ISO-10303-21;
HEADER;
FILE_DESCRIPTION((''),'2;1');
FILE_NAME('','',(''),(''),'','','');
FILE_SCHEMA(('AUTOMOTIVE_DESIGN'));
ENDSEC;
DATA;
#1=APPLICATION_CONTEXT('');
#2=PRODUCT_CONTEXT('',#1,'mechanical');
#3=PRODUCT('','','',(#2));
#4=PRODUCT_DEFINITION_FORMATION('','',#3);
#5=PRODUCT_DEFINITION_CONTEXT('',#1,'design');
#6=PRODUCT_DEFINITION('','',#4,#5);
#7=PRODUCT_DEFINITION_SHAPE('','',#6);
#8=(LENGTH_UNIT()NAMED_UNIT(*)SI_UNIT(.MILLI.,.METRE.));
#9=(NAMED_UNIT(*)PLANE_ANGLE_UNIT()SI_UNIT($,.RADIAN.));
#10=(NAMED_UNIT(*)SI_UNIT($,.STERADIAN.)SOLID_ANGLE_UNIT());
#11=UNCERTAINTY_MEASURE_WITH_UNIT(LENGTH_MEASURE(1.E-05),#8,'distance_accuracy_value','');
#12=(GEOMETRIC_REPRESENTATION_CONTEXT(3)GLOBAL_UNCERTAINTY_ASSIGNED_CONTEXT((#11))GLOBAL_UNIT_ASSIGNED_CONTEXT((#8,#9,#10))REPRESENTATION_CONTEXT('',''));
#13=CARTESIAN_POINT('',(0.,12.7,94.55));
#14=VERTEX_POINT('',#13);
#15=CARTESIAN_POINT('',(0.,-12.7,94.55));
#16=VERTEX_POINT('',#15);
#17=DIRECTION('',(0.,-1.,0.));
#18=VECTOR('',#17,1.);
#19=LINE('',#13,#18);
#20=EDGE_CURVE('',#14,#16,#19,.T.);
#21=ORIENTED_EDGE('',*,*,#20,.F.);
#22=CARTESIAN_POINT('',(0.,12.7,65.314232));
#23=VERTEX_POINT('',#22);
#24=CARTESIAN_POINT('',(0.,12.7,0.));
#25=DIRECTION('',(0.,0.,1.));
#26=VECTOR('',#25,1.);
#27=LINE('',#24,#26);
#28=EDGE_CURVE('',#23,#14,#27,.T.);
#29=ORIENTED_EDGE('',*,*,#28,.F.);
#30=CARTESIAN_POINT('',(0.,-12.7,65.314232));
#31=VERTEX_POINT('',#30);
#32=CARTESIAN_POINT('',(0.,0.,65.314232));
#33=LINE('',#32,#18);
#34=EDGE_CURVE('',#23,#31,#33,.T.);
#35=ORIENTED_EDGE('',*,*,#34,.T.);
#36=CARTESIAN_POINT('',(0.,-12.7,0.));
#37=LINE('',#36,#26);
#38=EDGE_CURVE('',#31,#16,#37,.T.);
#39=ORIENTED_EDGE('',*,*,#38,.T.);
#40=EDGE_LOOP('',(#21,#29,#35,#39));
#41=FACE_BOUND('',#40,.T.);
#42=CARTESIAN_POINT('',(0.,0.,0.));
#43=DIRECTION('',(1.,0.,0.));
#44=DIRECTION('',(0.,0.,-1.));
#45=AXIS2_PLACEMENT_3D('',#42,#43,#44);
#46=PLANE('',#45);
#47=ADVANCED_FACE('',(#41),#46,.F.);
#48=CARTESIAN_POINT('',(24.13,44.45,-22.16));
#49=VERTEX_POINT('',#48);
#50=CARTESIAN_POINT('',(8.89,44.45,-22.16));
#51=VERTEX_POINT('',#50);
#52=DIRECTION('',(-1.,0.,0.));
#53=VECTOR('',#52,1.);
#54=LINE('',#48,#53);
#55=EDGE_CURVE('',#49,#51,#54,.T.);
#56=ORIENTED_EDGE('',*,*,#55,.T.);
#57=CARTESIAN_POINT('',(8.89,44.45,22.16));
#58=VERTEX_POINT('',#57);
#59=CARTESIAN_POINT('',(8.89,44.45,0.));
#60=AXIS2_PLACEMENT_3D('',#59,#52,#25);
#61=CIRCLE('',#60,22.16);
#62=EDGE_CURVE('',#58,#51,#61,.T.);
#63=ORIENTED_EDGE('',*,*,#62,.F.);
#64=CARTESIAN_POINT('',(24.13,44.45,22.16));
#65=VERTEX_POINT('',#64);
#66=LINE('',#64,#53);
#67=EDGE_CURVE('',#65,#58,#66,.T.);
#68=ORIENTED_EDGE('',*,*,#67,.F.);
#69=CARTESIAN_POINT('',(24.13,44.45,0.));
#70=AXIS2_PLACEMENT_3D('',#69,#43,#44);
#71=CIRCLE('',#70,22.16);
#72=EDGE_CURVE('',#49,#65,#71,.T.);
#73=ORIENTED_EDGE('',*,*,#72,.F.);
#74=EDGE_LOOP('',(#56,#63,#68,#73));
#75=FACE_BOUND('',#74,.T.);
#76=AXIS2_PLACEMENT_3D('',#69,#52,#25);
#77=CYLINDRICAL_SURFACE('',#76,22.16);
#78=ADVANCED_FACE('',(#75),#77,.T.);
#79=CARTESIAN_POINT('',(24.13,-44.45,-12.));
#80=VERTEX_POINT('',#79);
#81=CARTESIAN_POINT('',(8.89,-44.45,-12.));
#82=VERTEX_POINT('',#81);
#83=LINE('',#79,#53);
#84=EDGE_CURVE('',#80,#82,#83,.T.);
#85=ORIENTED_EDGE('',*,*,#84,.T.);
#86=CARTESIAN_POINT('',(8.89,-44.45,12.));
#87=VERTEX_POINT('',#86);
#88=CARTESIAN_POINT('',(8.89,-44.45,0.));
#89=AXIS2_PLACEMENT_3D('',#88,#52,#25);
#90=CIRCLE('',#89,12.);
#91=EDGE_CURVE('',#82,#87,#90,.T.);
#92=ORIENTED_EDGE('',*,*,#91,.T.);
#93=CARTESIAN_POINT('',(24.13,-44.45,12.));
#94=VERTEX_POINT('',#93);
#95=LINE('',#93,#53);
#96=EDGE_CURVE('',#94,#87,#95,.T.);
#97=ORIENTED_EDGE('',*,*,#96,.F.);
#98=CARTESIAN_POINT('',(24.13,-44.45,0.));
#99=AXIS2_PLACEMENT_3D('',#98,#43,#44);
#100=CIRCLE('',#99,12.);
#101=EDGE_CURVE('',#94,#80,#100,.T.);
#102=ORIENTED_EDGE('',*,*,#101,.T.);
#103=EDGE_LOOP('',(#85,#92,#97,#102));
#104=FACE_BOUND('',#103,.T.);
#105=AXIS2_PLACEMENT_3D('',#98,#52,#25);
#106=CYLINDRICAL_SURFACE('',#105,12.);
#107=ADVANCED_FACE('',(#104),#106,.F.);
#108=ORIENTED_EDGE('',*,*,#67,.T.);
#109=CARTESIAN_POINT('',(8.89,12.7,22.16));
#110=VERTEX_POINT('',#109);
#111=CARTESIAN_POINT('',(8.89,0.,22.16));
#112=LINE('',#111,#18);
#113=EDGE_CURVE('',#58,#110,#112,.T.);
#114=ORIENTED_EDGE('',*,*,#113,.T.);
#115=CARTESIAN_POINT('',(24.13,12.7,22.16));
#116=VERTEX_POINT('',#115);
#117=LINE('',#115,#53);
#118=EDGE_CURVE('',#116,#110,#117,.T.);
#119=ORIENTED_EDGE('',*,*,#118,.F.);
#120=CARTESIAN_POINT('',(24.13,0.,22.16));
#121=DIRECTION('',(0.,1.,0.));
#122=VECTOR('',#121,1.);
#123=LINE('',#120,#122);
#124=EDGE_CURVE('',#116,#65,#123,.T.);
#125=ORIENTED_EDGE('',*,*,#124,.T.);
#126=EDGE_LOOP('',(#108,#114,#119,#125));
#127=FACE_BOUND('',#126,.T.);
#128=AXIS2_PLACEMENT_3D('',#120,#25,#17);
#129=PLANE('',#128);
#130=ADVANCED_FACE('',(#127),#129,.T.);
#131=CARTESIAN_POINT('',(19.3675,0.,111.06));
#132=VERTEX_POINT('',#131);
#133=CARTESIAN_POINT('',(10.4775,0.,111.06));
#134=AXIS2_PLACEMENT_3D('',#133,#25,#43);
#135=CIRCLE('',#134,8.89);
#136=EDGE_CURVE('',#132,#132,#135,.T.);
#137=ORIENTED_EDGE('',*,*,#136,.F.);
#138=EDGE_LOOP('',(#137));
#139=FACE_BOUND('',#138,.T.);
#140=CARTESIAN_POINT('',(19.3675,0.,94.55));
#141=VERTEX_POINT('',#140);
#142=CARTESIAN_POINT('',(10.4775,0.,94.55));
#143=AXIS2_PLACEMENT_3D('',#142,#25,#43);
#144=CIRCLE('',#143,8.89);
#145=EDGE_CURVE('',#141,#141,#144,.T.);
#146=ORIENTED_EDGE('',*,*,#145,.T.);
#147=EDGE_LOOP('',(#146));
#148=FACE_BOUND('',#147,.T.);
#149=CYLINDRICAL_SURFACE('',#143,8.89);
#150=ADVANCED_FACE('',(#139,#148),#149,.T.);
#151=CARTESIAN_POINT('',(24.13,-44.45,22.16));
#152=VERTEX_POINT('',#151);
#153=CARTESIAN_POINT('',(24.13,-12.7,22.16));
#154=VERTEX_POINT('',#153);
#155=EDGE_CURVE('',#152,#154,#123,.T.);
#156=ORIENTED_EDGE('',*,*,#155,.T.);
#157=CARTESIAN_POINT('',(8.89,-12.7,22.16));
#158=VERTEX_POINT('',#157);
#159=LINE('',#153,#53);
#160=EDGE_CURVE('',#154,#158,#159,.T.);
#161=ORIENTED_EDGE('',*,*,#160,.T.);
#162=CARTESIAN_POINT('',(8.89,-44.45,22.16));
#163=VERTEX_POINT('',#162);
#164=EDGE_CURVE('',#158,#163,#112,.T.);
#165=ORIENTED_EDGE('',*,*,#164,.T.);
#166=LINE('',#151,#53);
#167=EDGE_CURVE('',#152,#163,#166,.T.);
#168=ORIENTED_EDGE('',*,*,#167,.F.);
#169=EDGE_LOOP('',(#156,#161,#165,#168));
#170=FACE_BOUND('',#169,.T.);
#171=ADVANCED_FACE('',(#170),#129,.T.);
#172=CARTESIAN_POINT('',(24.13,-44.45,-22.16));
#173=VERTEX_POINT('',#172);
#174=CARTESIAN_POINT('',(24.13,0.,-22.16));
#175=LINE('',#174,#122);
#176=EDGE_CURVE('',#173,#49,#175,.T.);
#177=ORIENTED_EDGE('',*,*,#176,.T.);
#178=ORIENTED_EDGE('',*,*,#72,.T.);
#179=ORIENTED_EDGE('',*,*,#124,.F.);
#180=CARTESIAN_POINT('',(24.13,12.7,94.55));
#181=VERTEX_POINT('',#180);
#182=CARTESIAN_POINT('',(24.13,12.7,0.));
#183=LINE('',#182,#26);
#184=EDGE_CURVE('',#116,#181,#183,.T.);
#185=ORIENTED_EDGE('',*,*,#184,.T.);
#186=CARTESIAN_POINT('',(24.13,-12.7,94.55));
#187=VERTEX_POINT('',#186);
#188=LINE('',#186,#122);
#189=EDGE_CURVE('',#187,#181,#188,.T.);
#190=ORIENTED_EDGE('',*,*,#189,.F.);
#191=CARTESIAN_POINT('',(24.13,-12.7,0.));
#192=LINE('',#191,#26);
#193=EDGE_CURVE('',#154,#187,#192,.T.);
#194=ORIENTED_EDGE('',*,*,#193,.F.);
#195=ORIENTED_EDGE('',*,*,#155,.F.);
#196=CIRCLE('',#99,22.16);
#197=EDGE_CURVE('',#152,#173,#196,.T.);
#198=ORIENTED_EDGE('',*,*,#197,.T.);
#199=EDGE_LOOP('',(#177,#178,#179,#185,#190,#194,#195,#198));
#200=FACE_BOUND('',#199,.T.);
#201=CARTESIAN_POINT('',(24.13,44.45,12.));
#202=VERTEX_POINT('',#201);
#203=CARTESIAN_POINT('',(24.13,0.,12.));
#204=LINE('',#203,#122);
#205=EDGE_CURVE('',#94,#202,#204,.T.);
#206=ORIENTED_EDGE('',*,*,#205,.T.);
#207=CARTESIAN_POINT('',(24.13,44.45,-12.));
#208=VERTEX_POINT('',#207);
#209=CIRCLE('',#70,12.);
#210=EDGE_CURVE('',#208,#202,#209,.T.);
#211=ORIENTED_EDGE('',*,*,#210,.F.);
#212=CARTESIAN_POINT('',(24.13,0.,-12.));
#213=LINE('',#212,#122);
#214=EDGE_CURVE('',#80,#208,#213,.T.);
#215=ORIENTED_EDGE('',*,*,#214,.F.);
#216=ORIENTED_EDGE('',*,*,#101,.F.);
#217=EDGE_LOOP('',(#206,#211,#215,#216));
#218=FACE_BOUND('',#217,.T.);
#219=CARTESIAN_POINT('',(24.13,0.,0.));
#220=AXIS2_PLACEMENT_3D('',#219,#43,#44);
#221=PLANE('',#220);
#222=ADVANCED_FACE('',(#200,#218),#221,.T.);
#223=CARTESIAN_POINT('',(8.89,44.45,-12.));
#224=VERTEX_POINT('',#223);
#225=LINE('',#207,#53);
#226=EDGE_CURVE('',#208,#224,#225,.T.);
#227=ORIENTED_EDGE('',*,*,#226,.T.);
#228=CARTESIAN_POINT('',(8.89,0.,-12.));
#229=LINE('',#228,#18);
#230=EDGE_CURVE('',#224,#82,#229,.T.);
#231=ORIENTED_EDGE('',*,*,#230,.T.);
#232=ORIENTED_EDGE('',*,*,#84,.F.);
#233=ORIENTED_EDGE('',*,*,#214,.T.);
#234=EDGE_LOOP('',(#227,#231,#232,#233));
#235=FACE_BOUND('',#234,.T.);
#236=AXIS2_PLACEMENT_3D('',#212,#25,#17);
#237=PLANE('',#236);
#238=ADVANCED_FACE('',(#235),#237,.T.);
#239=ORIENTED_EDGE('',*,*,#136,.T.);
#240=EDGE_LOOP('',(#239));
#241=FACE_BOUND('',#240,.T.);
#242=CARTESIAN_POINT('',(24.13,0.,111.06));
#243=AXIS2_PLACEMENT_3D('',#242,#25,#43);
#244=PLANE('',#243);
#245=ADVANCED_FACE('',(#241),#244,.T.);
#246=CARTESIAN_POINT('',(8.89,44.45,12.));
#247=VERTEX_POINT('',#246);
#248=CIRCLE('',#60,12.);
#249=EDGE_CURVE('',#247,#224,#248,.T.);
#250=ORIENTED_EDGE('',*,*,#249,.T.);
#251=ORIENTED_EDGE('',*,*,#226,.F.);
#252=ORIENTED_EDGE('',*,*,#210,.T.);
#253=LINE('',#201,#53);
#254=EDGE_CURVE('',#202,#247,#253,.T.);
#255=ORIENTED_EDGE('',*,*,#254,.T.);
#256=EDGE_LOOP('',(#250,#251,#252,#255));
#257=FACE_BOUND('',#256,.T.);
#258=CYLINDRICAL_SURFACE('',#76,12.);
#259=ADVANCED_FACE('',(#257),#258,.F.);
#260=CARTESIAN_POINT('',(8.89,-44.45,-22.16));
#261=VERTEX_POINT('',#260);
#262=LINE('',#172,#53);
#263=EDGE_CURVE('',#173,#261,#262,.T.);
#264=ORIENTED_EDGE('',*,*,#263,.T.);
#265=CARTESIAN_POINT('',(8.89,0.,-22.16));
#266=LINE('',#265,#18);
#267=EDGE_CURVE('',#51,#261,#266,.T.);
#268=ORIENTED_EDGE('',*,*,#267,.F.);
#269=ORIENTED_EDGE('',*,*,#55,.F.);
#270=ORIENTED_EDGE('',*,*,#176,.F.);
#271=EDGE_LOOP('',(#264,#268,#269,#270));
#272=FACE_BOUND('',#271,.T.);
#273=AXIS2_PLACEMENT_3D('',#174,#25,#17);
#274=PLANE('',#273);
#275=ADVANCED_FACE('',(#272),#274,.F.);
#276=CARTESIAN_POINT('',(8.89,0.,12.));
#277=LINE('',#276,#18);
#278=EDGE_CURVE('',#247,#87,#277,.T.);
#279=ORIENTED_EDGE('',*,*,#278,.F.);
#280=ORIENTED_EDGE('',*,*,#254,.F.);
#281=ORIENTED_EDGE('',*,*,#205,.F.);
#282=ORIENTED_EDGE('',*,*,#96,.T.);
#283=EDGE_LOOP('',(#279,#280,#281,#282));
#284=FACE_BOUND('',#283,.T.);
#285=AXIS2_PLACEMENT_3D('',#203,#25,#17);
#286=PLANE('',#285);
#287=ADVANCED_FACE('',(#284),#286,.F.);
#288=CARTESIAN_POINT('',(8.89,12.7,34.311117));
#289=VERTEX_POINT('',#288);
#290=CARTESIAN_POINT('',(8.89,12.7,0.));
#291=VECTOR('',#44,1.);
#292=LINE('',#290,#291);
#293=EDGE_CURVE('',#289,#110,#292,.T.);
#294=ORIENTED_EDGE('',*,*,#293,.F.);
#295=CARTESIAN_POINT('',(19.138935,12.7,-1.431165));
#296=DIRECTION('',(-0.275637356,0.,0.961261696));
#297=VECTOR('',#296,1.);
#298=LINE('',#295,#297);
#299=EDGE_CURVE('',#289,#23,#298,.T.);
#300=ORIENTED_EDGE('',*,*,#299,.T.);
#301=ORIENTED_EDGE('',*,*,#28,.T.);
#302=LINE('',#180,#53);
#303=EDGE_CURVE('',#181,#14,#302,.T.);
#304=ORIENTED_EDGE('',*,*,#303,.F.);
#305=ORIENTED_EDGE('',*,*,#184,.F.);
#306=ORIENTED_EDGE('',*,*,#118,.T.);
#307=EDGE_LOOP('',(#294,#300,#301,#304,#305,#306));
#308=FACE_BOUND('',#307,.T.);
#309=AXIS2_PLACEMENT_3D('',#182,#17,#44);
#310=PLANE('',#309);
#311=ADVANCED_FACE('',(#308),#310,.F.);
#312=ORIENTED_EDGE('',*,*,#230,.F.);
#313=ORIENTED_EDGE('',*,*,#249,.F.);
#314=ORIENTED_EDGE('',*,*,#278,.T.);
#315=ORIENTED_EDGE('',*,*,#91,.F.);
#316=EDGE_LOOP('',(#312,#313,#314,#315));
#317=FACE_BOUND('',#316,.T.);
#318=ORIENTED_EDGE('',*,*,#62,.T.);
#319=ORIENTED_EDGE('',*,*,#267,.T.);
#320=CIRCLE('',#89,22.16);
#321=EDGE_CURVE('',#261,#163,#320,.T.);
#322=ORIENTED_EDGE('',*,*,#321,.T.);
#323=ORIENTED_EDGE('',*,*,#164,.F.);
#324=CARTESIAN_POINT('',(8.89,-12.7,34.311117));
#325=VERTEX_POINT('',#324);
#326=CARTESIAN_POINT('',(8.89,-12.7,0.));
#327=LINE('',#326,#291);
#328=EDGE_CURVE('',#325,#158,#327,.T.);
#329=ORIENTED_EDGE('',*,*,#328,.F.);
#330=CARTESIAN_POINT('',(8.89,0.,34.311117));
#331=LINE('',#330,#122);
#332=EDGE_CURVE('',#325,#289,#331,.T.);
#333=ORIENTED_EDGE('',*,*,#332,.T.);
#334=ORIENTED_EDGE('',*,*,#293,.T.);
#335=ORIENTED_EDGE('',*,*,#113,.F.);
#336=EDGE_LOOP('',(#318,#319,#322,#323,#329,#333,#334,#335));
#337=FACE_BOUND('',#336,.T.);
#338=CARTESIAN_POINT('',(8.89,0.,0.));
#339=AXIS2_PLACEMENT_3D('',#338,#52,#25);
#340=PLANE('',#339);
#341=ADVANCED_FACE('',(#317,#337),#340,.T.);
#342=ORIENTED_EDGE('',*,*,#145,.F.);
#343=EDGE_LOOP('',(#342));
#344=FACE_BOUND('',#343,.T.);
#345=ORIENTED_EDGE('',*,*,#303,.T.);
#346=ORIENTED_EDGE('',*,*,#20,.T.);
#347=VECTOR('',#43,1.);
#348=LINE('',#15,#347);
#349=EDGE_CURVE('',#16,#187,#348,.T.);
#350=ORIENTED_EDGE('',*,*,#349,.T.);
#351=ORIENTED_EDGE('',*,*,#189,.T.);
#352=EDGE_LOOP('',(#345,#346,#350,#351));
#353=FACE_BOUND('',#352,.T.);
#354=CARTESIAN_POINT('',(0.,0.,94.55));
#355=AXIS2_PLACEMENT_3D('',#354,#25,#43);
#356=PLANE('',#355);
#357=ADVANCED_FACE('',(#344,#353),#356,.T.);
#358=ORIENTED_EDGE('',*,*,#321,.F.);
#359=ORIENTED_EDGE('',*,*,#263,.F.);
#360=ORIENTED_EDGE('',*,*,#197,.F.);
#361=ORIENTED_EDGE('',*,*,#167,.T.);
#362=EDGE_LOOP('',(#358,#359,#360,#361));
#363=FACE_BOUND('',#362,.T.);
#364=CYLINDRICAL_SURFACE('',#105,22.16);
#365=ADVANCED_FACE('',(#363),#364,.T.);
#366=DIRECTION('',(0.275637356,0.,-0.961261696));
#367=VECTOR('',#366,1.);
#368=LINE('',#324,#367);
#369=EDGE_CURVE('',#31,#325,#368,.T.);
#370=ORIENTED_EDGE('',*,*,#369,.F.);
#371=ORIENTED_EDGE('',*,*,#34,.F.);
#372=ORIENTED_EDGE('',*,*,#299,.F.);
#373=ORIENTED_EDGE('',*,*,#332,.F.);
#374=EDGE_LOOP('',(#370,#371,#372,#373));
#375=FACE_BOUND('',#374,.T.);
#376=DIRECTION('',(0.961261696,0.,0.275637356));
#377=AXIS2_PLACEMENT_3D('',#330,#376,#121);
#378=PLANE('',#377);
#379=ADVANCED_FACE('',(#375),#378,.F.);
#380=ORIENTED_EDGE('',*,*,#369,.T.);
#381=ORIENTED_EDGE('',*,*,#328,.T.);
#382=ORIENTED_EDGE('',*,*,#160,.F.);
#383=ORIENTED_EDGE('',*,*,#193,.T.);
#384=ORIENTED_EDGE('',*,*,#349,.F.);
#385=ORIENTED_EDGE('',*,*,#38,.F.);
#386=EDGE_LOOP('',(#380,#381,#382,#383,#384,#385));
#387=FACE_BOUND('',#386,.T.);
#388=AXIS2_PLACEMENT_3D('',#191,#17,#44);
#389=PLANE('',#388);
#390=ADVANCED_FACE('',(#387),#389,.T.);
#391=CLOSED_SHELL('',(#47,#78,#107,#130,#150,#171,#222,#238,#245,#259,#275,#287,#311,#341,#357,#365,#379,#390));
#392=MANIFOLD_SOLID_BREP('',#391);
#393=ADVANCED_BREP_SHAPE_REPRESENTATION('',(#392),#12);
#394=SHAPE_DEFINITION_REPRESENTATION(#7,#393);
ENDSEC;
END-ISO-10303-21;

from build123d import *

# Parameters (mm, degrees)
BOSS_EXTRUDE2_DEPTH = 24.13
SKETCH3_W           = 24.13
SKETCH3_H           = 25.4
SKETCH3_R           = 8.89
CUT_EXTRUDE3_DEPTH  = 16.51
SKETCH4_W           = 138.37052371
SKETCH4_H           = 157.28988693
CUT_EXTRUDE4_DEPTH  = 8.89
CHAMFER1_SIZE       = 34.874144438
CHAMFER1_SIZE_2     = 10


with BuildPart() as part:
    # Sketch2 → Boss-Extrude2 (new body)
    # profile 1 of 2: a face of its own
    with BuildSketch(Plane(origin=(0, 0, 0), x_dir=(0, 0, -1), z_dir=(1, 0, 0))):
        Polygon((-111.06, -12.7), (-22.16, -12.7), (-22.16, 0), (-22.16, 12.7), (-111.06, 12.7), align=None)
    # profile 2 of 2: a face of its own
    with BuildSketch(Plane(origin=(0, 0, 0), x_dir=(0, 0, -1), z_dir=(1, 0, 0))):
        with BuildLine():
            Line((-22.16, -44.45), (-22.16, 44.45))
            ThreePointArc((-22.16, 44.45), (0, 66.61), (22.16, 44.45))
            Line((22.16, 44.45), (22.16, -44.45))
            ThreePointArc((22.16, -44.45), (0, -66.61), (-22.16, -44.45))
        make_face()
        with BuildLine():
            ThreePointArc((12, 44.45), (0, 56.45), (-12, 44.45))
            Line((-12, 44.45), (-12, -44.45))
            ThreePointArc((-12, -44.45), (0, -56.45), (12, -44.45))
            Line((12, -44.45), (12, 44.45))
        make_face(mode=Mode.SUBTRACT)
    extrude(amount=BOSS_EXTRUDE2_DEPTH)

    # Sketch3 → Cut-Extrude3 (cut)
    with BuildSketch(Plane.XY.offset(111.06)):
        with Locations((12.065, 0)):
            Rectangle(SKETCH3_W, SKETCH3_H)
        with Locations((10.4775, 0)):
            Circle(SKETCH3_R, mode=Mode.SUBTRACT)
    extrude(amount=-CUT_EXTRUDE3_DEPTH, mode=Mode.SUBTRACT)

    # Sketch4 → Cut-Extrude4 (cut)
    with BuildSketch(Plane.ZY):
        Rectangle(SKETCH4_W, SKETCH4_H)
    extrude(amount=-CUT_EXTRUDE4_DEPTH, mode=Mode.SUBTRACT)

    # Chamfer1
    # the kernel refuses this chamfer: 34.874144438, 10 mm, written as the material it adds along each edge
    with BuildSketch(Plane(origin=(8.89, 12.7, 69.185261855), x_dir=(0.010616657410321159, 0, -0.9999436417045873), z_dir=(0, -1, 0))) as chamfer1_piece_1_section:
        Polygon((CHAMFER1_SIZE * 0.999943641716, -CHAMFER1_SIZE * 0.0106166574104), (-CHAMFER1_SIZE_2 * 0.0106166574103, -CHAMFER1_SIZE_2 * 0.999943641705), (0, 0), align=None)
    chamfer1_piece_1 = extrude(amount=25.4, mode=Mode.PRIVATE)
    chamfer1_piece_1 = split(chamfer1_piece_1, bisect_by=Plane(origin=(0, 0, 56.832486902), z_dir=(1, 0, 0)), keep=Keep.TOP, mode=Mode.PRIVATE)
    add(chamfer1_piece_1)


solid = part.part
